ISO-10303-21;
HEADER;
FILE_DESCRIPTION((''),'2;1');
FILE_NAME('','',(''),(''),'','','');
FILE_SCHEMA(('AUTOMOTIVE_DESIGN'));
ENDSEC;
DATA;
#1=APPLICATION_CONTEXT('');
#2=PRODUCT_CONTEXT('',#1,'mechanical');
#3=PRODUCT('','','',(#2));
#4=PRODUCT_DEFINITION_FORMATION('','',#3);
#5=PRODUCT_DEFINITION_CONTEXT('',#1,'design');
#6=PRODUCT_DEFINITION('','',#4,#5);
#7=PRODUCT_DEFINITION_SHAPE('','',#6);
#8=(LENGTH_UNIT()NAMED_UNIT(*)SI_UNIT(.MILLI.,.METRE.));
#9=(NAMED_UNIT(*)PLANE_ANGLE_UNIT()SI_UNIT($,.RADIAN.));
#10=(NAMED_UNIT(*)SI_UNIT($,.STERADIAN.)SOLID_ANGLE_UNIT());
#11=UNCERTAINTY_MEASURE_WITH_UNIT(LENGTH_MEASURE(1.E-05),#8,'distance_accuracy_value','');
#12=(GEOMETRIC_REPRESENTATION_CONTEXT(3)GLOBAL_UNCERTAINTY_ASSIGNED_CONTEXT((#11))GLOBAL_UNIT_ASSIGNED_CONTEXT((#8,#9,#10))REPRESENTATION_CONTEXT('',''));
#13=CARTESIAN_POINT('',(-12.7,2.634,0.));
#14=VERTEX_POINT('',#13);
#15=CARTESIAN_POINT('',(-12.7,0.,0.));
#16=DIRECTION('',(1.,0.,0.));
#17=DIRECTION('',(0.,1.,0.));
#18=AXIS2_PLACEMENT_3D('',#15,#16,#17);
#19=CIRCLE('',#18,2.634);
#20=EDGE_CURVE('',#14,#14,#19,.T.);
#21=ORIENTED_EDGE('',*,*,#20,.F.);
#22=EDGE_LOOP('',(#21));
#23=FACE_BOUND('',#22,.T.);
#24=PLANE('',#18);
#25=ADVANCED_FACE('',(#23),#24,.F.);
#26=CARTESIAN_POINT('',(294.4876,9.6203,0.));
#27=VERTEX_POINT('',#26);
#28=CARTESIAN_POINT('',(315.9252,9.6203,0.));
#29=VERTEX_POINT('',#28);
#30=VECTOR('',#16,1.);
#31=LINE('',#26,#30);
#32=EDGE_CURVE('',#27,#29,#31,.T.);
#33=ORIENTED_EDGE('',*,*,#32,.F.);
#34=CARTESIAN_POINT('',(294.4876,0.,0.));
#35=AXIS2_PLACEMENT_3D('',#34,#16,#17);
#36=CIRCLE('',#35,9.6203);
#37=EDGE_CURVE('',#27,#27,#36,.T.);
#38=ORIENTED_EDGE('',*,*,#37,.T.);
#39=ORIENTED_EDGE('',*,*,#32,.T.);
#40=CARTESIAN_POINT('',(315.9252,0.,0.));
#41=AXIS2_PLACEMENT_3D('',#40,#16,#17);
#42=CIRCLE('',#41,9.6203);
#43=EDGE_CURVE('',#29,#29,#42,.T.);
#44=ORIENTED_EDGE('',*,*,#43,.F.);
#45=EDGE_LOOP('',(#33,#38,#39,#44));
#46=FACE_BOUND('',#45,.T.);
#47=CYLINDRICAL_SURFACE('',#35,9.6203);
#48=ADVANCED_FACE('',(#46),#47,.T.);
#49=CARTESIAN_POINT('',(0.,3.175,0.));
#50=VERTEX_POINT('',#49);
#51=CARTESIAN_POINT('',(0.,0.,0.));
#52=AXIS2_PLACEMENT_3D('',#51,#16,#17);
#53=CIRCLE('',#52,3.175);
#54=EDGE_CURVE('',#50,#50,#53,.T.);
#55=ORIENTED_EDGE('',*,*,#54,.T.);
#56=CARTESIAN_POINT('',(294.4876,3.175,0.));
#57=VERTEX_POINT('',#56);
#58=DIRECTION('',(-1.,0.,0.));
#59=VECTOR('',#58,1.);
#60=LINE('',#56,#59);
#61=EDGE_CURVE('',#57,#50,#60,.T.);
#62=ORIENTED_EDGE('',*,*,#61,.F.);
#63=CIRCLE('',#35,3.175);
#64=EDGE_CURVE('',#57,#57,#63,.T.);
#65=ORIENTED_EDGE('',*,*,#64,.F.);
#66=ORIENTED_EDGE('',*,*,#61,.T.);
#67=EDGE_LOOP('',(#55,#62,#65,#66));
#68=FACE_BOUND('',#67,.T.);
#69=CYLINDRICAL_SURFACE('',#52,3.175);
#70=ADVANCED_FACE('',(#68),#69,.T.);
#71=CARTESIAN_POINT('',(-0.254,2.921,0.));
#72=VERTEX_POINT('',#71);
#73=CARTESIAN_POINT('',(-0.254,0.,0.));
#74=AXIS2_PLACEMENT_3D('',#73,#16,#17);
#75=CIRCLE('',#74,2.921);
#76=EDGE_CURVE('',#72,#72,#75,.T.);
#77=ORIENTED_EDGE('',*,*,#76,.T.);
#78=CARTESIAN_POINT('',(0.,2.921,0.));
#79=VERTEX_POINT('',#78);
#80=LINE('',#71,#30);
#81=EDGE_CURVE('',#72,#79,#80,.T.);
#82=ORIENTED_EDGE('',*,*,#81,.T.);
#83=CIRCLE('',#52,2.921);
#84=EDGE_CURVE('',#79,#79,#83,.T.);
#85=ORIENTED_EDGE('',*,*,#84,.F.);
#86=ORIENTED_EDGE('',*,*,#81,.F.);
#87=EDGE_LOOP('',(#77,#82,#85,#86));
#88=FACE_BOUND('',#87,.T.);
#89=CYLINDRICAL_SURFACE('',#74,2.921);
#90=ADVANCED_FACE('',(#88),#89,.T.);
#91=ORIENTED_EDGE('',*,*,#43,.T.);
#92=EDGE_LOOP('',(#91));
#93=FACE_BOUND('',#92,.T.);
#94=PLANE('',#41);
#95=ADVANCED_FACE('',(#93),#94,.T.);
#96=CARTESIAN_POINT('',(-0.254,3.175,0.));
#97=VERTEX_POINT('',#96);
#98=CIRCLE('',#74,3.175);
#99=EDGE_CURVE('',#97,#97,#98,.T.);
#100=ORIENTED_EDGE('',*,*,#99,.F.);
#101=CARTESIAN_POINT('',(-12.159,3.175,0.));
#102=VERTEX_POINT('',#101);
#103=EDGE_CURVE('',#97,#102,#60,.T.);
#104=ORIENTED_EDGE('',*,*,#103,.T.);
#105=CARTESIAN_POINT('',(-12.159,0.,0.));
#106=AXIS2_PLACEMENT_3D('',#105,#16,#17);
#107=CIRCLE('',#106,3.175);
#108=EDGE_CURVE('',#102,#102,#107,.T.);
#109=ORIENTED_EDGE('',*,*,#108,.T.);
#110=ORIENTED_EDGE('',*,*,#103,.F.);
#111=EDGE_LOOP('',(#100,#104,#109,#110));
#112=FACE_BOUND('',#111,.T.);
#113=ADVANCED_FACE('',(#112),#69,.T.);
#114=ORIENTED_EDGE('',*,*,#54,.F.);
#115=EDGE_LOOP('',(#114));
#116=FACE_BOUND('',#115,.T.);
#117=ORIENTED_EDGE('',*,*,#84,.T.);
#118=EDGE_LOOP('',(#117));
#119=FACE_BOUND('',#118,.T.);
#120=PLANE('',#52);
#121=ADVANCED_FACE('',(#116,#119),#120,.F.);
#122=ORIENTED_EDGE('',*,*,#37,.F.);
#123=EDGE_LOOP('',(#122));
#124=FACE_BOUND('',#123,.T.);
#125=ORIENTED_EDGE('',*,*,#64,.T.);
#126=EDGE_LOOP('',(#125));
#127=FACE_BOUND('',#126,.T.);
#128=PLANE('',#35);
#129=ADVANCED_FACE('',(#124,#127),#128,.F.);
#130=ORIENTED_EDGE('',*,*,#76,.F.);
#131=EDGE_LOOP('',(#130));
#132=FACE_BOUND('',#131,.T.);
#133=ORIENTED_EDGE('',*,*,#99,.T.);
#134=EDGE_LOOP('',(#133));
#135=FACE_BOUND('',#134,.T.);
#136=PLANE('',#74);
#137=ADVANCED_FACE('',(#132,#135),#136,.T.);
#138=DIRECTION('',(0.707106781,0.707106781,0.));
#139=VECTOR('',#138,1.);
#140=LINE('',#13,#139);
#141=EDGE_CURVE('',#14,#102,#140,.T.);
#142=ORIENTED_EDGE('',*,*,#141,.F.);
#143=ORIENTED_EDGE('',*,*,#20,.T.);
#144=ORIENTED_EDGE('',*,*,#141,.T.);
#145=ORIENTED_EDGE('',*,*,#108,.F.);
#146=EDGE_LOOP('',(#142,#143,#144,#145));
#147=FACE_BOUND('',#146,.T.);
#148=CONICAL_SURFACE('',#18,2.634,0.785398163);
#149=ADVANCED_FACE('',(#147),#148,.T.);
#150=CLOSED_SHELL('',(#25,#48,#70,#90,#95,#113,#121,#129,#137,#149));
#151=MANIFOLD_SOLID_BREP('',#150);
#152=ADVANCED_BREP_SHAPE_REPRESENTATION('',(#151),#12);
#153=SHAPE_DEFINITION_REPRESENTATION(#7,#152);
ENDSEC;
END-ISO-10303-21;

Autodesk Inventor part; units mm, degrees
sketch "Sketch_1" plane through (0, 0, 0) normal (0, 0, 1) x (1, 0, 0)
  line L0 (315.9252, 0) -> (0, 0)
  line L1 (0, 0) -> (0, 3.175)
  line L2 (0, 3.175) -> (294.4876, 3.175)
  line L3 (294.4876, 3.175) -> (294.4876, 9.6203)
  line L4 (294.4876, 9.6203) -> (315.9252, 9.6203)
  line L5 (315.9252, 9.6203) -> (315.9252, 0)
  line L6 (315.9252, 0) -> (0, 0)
revolve "Revolution1" add sketch "Sketch_1" angle 360 about axis through (315.9252, 0, 0) along (1, 0, 0)
sketch "Sketch_3" plane through (0, 0, 0) normal (0, 0, 1) x (1, 0, 0)
  line L0 (0, 0) -> (-12.7, 0)
  line L1 (-12.7, 0) -> (-12.7, 2.634)
  line L2 (-12.7, 2.634) -> (-12.159, 3.175)
  line L3 (-12.159, 3.175) -> (0, 3.175)
  line L4 (0, 3.175) -> (0, 0)
  line L5 (0, 0) -> (-12.7, 0)
revolve "Revolution2" add sketch "Sketch_3" angle 360 about axis through (0, 0, 0) along (1, 0, 0)
thread "Thread1" size "1/4-28 UNF" class "2A" standard "ANSI Unified Screw Threads" length 12.159
sketch "Sketch_30" plane through (0, 0, 0) normal (0, 0, 1) x (1, 0, 0)
  line L0 (0, 0) -> (-0.254, 0)
  line L1 (-0.254, 2.921) -> (0, 2.921)
  line L2 (0, 2.921) -> (0, 3.429)
  line L3 (0, 3.429) -> (-0.254, 3.429)
  line L4 (-0.254, 3.429) -> (-0.254, 2.921)
revolve "Revolution3" cut sketch "Sketch_30" angle 360 about axis through (0, 0, 0) along (1, 0, 0)
ref_plane "dia1_XY" through (0, 3.175, 0) normal (1, 0, 0) x (0, 0, -1)
ref_plane "dia1_YZ" through (0, 3.175, 0) normal (0, 0, -1) x (0, 1, 0)
ref_plane "dia1_ZX" through (0, 3.175, 0) normal (0, 1, 0) x (1, 0, 0)
ref_plane "dia12_XY" through (0, 0, 10.9537) normal (1, 0, 0) x (0, 0, -1)
ref_plane "dia12_YZ" through (0, 0, 10.9537) normal (0, 0, -1) x (0, 1, 0)
ref_plane "dia12_ZX" through (0, 0, 10.9537) normal (0, 1, 0) x (1, 0, 0)
ref_plane "dia2_XY" through (0, -3.175, 0) normal (1, 0, 0) x (0, 0, -1)
ref_plane "dia2_YZ" through (0, -3.175, 0) normal (0, 0, -1) x (0, 1, 0)
ref_plane "dia2_ZX" through (0, -3.175, 0) normal (0, 1, 0) x (1, 0, 0)
ref_plane "dia22_XY" through (0, 0, -10.9537) normal (1, 0, 0) x (0, 0, -1)
ref_plane "dia22_YZ" through (0, 0, -10.9537) normal (0, 0, -1) x (0, 1, 0)
ref_plane "dia22_ZX" through (0, 0, -10.9537) normal (0, 1, 0) x (1, 0, 0)
ref_plane "rl1_XY" through (-12.7, 0, 0) normal (1, 0, 0) x (0, 0, -1)
ref_plane "rl1_YZ" through (-12.7, 0, 0) normal (0, 0, -1) x (0, 1, 0)
ref_plane "rl1_ZX" through (-12.7, 0, 0) normal (0, 1, 0) x (1, 0, 0)
ref_plane "rl2_XY" through (0, 0, 0) normal (1, 0, 0) x (0, 0, -1)
ref_plane "rl2_YZ" through (0, 0, 0) normal (0, 0, -1) x (0, 1, 0)
ref_plane "rl2_ZX" through (0, 0, 0) normal (0, 1, 0) x (1, 0, 0)
ref_plane "rod_cp_XY" through (0, 0, 0) normal (1, 0, 0) x (0, 0, -1)
ref_plane "rod_cp_YZ" through (0, 0, 0) normal (0, 0, -1) x (0, 1, 0)
ref_plane "rod_cp_ZX" through (0, 0, 0) normal (0, 1, 0) x (1, 0, 0)
ref_plane "thd1_XY" through (-12.7, 3.175, 0) normal (1, 0, 0) x (0, 0, -1)
ref_plane "thd1_YZ" through (-12.7, 3.175, 0) normal (0, 0, -1) x (0, 1, 0)
ref_plane "thd1_ZX" through (-12.7, 3.175, 0) normal (0, 1, 0) x (1, 0, 0)
ref_plane "thd2_XY" through (-12.7, -3.175, 0) normal (1, 0, 0) x (0, 0, -1)
ref_plane "thd2_YZ" through (-12.7, -3.175, 0) normal (0, 0, -1) x (0, 1, 0)
ref_plane "thd2_ZX" through (-12.7, -3.175, 0) normal (0, 1, 0) x (1, 0, 0)
ref_plane "to_rod_clevis_XY" through (-16.764, 0, 0) normal (1, 0, 0) x (0, 0, -1)
ref_plane "to_rod_clevis_YZ" through (-16.764, 0, 0) normal (0, 0, -1) x (0, 1, 0)
ref_plane "to_rod_clevis_ZX" through (-16.764, 0, 0) normal (0, 1, 0) x (1, 0, 0)
properties part number "C-0410-DP0_rod"
